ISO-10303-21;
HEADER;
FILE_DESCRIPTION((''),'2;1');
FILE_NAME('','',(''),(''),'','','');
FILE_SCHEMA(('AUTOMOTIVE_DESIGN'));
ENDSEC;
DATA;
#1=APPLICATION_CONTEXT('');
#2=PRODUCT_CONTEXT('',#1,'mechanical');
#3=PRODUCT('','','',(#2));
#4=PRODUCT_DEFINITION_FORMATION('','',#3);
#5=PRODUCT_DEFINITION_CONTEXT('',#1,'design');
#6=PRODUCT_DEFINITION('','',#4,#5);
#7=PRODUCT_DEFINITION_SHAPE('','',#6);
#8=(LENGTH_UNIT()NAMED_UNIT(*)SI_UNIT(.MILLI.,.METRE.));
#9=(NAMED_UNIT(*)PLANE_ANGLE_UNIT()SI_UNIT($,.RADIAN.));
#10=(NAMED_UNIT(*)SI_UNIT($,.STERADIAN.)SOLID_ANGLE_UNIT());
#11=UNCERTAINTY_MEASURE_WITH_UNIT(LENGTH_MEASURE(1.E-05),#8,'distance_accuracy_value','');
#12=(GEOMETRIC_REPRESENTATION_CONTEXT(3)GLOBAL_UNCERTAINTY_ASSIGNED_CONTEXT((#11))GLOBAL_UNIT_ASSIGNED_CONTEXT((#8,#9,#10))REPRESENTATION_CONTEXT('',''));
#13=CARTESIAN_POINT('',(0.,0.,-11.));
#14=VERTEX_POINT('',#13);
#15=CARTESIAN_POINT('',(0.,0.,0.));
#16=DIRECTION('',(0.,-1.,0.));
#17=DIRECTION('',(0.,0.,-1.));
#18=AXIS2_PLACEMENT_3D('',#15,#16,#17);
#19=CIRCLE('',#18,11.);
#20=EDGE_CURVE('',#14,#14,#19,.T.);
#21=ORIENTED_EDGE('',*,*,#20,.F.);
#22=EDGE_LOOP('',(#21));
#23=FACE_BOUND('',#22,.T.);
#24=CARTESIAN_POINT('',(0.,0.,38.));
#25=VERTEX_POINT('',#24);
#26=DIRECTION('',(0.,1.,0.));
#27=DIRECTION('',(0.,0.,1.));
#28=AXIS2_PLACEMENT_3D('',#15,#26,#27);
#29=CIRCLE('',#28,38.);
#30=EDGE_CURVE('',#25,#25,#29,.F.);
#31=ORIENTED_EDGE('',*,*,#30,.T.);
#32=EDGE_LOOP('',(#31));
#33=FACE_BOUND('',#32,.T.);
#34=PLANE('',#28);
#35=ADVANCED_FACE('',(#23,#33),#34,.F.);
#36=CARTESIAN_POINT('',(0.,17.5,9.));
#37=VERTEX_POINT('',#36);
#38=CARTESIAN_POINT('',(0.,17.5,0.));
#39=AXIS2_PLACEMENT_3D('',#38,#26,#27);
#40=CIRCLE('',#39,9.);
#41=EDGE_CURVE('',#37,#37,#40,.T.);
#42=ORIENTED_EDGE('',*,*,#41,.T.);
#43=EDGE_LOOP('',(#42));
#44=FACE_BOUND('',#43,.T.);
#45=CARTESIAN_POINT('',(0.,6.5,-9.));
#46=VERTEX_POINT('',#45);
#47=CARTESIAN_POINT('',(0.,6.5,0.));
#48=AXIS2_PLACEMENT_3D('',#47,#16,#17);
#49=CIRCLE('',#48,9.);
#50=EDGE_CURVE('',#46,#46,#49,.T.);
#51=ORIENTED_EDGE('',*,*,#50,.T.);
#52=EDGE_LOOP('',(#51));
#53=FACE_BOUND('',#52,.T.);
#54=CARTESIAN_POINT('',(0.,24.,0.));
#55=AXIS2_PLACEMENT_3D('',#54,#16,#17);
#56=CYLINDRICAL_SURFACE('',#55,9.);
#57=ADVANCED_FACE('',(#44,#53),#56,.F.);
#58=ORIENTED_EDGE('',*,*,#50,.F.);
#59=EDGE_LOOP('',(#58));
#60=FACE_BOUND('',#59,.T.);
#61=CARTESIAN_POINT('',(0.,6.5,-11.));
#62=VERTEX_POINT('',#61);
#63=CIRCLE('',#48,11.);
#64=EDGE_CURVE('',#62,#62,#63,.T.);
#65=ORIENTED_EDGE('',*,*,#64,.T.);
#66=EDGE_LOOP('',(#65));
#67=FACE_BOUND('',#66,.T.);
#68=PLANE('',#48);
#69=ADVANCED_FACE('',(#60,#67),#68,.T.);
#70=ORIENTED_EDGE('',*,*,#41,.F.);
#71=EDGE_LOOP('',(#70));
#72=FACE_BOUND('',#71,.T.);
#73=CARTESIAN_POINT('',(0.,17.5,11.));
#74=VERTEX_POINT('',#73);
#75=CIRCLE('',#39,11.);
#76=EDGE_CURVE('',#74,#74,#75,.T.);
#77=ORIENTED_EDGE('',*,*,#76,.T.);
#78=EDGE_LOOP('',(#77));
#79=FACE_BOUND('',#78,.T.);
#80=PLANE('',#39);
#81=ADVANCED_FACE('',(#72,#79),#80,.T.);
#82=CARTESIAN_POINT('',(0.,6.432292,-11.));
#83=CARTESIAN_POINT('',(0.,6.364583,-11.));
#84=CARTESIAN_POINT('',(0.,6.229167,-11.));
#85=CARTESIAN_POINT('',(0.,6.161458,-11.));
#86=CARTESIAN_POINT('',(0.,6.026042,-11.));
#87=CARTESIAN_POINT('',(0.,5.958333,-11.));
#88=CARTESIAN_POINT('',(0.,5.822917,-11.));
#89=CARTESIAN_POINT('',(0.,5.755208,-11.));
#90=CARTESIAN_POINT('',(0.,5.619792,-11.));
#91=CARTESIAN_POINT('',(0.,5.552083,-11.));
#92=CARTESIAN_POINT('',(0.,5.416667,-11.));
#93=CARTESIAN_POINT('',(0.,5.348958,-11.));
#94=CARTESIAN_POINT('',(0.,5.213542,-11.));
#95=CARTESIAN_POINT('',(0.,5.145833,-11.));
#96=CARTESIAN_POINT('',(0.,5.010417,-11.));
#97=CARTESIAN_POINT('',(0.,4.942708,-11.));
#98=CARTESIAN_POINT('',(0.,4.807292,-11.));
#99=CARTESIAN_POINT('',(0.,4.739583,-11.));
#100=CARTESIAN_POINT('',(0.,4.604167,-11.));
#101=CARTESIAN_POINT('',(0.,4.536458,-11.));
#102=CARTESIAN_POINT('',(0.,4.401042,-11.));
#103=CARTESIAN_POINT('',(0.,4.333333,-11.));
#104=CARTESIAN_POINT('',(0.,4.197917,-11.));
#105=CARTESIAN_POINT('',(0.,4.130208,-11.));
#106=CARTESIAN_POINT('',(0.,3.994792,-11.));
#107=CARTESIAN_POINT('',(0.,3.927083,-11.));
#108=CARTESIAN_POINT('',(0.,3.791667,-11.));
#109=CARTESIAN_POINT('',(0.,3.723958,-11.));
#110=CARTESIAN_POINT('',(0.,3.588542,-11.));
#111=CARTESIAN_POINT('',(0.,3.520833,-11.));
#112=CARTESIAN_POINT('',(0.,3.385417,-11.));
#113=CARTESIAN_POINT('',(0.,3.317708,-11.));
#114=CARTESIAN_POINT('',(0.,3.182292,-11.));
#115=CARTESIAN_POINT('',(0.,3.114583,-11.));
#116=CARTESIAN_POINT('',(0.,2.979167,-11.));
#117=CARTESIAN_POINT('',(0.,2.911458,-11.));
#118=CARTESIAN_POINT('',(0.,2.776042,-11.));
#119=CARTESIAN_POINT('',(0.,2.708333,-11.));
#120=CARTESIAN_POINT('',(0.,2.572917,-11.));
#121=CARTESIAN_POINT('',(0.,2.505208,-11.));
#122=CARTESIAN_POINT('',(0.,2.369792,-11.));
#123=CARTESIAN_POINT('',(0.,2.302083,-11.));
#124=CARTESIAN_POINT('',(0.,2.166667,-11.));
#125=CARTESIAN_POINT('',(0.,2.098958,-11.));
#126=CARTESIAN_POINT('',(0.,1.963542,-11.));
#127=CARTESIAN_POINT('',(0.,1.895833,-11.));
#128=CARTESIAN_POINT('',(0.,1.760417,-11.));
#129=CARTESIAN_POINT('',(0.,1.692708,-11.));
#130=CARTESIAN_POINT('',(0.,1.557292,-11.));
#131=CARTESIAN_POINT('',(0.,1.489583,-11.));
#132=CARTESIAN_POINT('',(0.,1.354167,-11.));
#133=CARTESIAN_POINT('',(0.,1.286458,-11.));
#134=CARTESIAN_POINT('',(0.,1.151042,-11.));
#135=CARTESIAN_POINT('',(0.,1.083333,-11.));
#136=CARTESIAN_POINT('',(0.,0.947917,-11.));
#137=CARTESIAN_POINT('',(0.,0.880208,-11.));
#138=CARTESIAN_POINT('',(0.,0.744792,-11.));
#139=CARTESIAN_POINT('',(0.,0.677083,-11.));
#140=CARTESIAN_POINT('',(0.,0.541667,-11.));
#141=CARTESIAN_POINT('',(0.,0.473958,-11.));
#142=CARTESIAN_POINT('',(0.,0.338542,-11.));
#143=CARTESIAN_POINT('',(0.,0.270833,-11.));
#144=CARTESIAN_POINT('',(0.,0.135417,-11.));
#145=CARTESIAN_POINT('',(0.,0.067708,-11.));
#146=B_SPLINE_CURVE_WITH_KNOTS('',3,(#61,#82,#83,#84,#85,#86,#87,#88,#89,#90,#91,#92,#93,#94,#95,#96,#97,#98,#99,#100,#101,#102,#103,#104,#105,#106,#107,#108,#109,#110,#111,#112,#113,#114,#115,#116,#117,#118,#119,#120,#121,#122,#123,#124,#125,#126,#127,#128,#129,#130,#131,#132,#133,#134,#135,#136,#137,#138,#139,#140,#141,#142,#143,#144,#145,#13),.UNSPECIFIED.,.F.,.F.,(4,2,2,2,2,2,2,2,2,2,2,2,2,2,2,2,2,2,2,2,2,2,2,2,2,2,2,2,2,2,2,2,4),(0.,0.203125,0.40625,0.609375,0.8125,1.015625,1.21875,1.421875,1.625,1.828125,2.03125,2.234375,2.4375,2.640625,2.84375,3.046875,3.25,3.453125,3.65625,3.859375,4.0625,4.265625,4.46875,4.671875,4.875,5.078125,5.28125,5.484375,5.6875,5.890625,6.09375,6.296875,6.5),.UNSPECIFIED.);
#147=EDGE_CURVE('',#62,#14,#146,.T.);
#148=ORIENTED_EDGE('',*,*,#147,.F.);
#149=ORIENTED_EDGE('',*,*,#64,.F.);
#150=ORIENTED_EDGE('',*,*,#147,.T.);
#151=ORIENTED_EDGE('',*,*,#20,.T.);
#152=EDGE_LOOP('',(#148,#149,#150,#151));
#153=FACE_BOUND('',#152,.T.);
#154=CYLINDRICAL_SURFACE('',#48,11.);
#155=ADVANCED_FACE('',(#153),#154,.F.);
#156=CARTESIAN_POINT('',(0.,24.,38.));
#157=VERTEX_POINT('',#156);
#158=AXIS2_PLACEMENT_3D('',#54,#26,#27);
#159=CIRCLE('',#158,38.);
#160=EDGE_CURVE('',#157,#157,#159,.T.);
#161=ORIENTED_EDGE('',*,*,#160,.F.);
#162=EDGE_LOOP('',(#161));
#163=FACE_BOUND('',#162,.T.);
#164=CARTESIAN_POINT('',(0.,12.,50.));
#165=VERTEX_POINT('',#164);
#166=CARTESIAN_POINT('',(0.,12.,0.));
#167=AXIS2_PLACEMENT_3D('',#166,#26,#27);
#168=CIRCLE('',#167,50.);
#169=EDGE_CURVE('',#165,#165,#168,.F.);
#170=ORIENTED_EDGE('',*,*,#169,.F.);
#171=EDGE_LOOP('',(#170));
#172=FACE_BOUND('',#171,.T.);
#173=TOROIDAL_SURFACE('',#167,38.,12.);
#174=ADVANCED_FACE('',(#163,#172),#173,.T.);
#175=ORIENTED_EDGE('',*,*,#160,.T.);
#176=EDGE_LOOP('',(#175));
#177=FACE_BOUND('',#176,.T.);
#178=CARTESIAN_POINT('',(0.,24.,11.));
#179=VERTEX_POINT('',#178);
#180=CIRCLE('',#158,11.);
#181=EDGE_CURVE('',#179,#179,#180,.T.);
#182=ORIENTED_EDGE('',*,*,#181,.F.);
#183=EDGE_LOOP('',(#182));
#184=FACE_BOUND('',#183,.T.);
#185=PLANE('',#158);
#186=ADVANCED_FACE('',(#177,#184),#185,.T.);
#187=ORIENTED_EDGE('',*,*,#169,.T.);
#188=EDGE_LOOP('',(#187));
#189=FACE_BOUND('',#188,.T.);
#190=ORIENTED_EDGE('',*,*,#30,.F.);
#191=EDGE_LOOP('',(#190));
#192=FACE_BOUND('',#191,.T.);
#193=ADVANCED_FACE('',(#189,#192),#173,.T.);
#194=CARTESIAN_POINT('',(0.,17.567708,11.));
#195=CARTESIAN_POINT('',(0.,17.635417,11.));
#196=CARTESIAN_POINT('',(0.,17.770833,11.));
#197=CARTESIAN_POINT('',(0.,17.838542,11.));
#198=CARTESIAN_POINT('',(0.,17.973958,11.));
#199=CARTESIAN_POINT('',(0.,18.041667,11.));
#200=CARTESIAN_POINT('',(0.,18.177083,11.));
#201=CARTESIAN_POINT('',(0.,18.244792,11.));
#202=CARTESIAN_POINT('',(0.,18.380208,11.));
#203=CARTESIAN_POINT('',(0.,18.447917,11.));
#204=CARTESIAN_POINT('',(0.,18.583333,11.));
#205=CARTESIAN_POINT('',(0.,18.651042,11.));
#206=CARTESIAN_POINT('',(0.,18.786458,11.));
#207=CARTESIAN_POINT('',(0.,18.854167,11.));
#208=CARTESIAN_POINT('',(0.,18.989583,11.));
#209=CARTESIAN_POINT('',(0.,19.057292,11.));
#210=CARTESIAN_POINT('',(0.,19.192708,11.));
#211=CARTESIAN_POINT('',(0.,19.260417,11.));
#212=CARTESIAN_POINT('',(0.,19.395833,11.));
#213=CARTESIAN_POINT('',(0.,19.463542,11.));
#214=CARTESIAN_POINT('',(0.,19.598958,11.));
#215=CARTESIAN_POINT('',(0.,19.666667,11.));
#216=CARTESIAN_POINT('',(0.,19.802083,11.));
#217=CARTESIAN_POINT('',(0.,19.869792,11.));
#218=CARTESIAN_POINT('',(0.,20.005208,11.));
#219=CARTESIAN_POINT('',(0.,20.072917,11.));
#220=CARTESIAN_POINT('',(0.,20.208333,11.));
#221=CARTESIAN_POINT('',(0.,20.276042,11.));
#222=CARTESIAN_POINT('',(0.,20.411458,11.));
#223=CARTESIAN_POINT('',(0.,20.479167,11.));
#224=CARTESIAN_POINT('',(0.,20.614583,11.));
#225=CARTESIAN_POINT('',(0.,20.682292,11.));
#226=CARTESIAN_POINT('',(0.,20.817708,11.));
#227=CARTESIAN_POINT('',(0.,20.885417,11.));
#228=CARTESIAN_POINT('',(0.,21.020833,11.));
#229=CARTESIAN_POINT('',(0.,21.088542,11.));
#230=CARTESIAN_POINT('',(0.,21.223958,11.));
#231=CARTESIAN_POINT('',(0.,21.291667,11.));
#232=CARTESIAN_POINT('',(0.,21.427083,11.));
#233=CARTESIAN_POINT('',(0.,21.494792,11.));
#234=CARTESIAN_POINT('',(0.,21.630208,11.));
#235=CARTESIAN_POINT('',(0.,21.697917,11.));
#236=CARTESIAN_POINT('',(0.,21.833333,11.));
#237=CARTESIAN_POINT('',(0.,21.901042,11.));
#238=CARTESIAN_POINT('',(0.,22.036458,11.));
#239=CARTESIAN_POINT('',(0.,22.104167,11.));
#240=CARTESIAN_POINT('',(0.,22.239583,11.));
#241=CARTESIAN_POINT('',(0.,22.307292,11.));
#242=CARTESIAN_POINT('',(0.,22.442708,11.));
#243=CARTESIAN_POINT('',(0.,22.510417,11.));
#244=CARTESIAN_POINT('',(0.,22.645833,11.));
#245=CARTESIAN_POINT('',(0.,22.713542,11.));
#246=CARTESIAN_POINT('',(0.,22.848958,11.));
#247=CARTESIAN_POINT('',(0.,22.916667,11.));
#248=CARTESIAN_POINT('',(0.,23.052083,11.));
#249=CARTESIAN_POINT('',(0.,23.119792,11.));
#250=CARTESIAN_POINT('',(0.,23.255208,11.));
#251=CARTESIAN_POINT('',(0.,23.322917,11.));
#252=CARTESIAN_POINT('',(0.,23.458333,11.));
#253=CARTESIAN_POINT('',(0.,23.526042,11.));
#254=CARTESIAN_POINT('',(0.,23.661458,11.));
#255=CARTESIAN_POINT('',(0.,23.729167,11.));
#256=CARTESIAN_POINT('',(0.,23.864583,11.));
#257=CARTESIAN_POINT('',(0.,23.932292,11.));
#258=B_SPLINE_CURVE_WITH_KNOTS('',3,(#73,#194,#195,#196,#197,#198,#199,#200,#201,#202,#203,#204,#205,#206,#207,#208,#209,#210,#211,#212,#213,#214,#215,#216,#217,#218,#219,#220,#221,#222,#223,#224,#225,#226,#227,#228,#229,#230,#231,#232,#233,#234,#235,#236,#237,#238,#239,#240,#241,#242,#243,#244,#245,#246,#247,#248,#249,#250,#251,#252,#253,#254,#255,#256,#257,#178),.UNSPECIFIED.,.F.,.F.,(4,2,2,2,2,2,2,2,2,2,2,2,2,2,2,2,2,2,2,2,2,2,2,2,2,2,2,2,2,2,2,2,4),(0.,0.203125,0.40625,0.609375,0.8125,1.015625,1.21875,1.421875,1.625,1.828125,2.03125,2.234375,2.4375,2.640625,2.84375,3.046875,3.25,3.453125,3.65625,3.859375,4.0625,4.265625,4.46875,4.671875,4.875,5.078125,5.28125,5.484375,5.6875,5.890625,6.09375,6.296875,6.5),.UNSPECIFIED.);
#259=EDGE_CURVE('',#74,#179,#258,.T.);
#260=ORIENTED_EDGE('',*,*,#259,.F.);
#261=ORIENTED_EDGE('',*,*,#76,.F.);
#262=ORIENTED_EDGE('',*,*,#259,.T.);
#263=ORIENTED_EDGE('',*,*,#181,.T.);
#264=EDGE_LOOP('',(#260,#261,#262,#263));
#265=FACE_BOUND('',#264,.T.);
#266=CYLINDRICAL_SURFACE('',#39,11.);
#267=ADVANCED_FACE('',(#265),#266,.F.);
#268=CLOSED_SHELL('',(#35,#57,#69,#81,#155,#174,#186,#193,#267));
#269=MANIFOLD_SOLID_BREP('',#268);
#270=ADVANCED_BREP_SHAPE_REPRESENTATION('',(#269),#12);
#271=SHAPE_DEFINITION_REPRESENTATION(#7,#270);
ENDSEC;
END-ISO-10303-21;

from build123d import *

# Parameters (mm, degrees)
SKETCH1_R           = 50
BOSS_EXTRUDE1_DEPTH = 24
FILLET1_R           = 12
SKETCH2_R           = 11
CUT_EXTRUDE1_DEPTH  = 6.5
CUT_EXTRUDE2_START  = -6.5
SKETCH3_R           = 11
CUT_EXTRUDE2_DEPTH  = 6.5
SKETCH4_R           = 9
CUT_EXTRUDE3_DEPTH  = 73.844011422


with BuildPart() as part:
    # Sketch1 → Boss-Extrude1 (new body)
    with BuildSketch(Plane(origin=(0, 0, 0), x_dir=(1, 0, 0), z_dir=(0, 1, 0))):
        with Locations(Location((0, 0, 0), (0, 0, 270))):
            Circle(SKETCH1_R)
    extrude(amount=BOSS_EXTRUDE1_DEPTH)

    # Fillet1
    fillet1_edges = [part.edges().sort_by_distance(p)[0] for p in [
        (0, 0, -50),
        (0, 24, -50),
    ]]
    fillet(fillet1_edges, radius=FILLET1_R - 0.0001)  # a hair under: the kernel refuses the full size

    # Sketch2 → Cut-Extrude1 (cut)
    with BuildSketch(Plane(origin=(0, 24, 0), x_dir=(1, 0, 0), z_dir=(0, 1, 0))):
        with Locations(Location((0, 0, 0), (0, 0, 270))):
            Circle(SKETCH2_R)
    extrude(amount=-CUT_EXTRUDE1_DEPTH, mode=Mode.SUBTRACT)

    # Sketch3 → Cut-Extrude2 (cut)
    with BuildSketch(Plane.XZ.offset(CUT_EXTRUDE2_START)):
        with Locations(Location((0, 0, 0), (0, 0, 90))):
            Circle(SKETCH3_R)
    extrude(amount=CUT_EXTRUDE2_DEPTH, mode=Mode.SUBTRACT)

    # Sketch4 → Cut-Extrude3 (cut, through all)
    with BuildSketch(Plane.XZ.offset(-6.5)):
        with Locations(Location((0, 0, 0), (0, 0, 270))):
            Circle(SKETCH4_R)
    extrude(amount=-CUT_EXTRUDE3_DEPTH, mode=Mode.SUBTRACT)


solid = part.part
